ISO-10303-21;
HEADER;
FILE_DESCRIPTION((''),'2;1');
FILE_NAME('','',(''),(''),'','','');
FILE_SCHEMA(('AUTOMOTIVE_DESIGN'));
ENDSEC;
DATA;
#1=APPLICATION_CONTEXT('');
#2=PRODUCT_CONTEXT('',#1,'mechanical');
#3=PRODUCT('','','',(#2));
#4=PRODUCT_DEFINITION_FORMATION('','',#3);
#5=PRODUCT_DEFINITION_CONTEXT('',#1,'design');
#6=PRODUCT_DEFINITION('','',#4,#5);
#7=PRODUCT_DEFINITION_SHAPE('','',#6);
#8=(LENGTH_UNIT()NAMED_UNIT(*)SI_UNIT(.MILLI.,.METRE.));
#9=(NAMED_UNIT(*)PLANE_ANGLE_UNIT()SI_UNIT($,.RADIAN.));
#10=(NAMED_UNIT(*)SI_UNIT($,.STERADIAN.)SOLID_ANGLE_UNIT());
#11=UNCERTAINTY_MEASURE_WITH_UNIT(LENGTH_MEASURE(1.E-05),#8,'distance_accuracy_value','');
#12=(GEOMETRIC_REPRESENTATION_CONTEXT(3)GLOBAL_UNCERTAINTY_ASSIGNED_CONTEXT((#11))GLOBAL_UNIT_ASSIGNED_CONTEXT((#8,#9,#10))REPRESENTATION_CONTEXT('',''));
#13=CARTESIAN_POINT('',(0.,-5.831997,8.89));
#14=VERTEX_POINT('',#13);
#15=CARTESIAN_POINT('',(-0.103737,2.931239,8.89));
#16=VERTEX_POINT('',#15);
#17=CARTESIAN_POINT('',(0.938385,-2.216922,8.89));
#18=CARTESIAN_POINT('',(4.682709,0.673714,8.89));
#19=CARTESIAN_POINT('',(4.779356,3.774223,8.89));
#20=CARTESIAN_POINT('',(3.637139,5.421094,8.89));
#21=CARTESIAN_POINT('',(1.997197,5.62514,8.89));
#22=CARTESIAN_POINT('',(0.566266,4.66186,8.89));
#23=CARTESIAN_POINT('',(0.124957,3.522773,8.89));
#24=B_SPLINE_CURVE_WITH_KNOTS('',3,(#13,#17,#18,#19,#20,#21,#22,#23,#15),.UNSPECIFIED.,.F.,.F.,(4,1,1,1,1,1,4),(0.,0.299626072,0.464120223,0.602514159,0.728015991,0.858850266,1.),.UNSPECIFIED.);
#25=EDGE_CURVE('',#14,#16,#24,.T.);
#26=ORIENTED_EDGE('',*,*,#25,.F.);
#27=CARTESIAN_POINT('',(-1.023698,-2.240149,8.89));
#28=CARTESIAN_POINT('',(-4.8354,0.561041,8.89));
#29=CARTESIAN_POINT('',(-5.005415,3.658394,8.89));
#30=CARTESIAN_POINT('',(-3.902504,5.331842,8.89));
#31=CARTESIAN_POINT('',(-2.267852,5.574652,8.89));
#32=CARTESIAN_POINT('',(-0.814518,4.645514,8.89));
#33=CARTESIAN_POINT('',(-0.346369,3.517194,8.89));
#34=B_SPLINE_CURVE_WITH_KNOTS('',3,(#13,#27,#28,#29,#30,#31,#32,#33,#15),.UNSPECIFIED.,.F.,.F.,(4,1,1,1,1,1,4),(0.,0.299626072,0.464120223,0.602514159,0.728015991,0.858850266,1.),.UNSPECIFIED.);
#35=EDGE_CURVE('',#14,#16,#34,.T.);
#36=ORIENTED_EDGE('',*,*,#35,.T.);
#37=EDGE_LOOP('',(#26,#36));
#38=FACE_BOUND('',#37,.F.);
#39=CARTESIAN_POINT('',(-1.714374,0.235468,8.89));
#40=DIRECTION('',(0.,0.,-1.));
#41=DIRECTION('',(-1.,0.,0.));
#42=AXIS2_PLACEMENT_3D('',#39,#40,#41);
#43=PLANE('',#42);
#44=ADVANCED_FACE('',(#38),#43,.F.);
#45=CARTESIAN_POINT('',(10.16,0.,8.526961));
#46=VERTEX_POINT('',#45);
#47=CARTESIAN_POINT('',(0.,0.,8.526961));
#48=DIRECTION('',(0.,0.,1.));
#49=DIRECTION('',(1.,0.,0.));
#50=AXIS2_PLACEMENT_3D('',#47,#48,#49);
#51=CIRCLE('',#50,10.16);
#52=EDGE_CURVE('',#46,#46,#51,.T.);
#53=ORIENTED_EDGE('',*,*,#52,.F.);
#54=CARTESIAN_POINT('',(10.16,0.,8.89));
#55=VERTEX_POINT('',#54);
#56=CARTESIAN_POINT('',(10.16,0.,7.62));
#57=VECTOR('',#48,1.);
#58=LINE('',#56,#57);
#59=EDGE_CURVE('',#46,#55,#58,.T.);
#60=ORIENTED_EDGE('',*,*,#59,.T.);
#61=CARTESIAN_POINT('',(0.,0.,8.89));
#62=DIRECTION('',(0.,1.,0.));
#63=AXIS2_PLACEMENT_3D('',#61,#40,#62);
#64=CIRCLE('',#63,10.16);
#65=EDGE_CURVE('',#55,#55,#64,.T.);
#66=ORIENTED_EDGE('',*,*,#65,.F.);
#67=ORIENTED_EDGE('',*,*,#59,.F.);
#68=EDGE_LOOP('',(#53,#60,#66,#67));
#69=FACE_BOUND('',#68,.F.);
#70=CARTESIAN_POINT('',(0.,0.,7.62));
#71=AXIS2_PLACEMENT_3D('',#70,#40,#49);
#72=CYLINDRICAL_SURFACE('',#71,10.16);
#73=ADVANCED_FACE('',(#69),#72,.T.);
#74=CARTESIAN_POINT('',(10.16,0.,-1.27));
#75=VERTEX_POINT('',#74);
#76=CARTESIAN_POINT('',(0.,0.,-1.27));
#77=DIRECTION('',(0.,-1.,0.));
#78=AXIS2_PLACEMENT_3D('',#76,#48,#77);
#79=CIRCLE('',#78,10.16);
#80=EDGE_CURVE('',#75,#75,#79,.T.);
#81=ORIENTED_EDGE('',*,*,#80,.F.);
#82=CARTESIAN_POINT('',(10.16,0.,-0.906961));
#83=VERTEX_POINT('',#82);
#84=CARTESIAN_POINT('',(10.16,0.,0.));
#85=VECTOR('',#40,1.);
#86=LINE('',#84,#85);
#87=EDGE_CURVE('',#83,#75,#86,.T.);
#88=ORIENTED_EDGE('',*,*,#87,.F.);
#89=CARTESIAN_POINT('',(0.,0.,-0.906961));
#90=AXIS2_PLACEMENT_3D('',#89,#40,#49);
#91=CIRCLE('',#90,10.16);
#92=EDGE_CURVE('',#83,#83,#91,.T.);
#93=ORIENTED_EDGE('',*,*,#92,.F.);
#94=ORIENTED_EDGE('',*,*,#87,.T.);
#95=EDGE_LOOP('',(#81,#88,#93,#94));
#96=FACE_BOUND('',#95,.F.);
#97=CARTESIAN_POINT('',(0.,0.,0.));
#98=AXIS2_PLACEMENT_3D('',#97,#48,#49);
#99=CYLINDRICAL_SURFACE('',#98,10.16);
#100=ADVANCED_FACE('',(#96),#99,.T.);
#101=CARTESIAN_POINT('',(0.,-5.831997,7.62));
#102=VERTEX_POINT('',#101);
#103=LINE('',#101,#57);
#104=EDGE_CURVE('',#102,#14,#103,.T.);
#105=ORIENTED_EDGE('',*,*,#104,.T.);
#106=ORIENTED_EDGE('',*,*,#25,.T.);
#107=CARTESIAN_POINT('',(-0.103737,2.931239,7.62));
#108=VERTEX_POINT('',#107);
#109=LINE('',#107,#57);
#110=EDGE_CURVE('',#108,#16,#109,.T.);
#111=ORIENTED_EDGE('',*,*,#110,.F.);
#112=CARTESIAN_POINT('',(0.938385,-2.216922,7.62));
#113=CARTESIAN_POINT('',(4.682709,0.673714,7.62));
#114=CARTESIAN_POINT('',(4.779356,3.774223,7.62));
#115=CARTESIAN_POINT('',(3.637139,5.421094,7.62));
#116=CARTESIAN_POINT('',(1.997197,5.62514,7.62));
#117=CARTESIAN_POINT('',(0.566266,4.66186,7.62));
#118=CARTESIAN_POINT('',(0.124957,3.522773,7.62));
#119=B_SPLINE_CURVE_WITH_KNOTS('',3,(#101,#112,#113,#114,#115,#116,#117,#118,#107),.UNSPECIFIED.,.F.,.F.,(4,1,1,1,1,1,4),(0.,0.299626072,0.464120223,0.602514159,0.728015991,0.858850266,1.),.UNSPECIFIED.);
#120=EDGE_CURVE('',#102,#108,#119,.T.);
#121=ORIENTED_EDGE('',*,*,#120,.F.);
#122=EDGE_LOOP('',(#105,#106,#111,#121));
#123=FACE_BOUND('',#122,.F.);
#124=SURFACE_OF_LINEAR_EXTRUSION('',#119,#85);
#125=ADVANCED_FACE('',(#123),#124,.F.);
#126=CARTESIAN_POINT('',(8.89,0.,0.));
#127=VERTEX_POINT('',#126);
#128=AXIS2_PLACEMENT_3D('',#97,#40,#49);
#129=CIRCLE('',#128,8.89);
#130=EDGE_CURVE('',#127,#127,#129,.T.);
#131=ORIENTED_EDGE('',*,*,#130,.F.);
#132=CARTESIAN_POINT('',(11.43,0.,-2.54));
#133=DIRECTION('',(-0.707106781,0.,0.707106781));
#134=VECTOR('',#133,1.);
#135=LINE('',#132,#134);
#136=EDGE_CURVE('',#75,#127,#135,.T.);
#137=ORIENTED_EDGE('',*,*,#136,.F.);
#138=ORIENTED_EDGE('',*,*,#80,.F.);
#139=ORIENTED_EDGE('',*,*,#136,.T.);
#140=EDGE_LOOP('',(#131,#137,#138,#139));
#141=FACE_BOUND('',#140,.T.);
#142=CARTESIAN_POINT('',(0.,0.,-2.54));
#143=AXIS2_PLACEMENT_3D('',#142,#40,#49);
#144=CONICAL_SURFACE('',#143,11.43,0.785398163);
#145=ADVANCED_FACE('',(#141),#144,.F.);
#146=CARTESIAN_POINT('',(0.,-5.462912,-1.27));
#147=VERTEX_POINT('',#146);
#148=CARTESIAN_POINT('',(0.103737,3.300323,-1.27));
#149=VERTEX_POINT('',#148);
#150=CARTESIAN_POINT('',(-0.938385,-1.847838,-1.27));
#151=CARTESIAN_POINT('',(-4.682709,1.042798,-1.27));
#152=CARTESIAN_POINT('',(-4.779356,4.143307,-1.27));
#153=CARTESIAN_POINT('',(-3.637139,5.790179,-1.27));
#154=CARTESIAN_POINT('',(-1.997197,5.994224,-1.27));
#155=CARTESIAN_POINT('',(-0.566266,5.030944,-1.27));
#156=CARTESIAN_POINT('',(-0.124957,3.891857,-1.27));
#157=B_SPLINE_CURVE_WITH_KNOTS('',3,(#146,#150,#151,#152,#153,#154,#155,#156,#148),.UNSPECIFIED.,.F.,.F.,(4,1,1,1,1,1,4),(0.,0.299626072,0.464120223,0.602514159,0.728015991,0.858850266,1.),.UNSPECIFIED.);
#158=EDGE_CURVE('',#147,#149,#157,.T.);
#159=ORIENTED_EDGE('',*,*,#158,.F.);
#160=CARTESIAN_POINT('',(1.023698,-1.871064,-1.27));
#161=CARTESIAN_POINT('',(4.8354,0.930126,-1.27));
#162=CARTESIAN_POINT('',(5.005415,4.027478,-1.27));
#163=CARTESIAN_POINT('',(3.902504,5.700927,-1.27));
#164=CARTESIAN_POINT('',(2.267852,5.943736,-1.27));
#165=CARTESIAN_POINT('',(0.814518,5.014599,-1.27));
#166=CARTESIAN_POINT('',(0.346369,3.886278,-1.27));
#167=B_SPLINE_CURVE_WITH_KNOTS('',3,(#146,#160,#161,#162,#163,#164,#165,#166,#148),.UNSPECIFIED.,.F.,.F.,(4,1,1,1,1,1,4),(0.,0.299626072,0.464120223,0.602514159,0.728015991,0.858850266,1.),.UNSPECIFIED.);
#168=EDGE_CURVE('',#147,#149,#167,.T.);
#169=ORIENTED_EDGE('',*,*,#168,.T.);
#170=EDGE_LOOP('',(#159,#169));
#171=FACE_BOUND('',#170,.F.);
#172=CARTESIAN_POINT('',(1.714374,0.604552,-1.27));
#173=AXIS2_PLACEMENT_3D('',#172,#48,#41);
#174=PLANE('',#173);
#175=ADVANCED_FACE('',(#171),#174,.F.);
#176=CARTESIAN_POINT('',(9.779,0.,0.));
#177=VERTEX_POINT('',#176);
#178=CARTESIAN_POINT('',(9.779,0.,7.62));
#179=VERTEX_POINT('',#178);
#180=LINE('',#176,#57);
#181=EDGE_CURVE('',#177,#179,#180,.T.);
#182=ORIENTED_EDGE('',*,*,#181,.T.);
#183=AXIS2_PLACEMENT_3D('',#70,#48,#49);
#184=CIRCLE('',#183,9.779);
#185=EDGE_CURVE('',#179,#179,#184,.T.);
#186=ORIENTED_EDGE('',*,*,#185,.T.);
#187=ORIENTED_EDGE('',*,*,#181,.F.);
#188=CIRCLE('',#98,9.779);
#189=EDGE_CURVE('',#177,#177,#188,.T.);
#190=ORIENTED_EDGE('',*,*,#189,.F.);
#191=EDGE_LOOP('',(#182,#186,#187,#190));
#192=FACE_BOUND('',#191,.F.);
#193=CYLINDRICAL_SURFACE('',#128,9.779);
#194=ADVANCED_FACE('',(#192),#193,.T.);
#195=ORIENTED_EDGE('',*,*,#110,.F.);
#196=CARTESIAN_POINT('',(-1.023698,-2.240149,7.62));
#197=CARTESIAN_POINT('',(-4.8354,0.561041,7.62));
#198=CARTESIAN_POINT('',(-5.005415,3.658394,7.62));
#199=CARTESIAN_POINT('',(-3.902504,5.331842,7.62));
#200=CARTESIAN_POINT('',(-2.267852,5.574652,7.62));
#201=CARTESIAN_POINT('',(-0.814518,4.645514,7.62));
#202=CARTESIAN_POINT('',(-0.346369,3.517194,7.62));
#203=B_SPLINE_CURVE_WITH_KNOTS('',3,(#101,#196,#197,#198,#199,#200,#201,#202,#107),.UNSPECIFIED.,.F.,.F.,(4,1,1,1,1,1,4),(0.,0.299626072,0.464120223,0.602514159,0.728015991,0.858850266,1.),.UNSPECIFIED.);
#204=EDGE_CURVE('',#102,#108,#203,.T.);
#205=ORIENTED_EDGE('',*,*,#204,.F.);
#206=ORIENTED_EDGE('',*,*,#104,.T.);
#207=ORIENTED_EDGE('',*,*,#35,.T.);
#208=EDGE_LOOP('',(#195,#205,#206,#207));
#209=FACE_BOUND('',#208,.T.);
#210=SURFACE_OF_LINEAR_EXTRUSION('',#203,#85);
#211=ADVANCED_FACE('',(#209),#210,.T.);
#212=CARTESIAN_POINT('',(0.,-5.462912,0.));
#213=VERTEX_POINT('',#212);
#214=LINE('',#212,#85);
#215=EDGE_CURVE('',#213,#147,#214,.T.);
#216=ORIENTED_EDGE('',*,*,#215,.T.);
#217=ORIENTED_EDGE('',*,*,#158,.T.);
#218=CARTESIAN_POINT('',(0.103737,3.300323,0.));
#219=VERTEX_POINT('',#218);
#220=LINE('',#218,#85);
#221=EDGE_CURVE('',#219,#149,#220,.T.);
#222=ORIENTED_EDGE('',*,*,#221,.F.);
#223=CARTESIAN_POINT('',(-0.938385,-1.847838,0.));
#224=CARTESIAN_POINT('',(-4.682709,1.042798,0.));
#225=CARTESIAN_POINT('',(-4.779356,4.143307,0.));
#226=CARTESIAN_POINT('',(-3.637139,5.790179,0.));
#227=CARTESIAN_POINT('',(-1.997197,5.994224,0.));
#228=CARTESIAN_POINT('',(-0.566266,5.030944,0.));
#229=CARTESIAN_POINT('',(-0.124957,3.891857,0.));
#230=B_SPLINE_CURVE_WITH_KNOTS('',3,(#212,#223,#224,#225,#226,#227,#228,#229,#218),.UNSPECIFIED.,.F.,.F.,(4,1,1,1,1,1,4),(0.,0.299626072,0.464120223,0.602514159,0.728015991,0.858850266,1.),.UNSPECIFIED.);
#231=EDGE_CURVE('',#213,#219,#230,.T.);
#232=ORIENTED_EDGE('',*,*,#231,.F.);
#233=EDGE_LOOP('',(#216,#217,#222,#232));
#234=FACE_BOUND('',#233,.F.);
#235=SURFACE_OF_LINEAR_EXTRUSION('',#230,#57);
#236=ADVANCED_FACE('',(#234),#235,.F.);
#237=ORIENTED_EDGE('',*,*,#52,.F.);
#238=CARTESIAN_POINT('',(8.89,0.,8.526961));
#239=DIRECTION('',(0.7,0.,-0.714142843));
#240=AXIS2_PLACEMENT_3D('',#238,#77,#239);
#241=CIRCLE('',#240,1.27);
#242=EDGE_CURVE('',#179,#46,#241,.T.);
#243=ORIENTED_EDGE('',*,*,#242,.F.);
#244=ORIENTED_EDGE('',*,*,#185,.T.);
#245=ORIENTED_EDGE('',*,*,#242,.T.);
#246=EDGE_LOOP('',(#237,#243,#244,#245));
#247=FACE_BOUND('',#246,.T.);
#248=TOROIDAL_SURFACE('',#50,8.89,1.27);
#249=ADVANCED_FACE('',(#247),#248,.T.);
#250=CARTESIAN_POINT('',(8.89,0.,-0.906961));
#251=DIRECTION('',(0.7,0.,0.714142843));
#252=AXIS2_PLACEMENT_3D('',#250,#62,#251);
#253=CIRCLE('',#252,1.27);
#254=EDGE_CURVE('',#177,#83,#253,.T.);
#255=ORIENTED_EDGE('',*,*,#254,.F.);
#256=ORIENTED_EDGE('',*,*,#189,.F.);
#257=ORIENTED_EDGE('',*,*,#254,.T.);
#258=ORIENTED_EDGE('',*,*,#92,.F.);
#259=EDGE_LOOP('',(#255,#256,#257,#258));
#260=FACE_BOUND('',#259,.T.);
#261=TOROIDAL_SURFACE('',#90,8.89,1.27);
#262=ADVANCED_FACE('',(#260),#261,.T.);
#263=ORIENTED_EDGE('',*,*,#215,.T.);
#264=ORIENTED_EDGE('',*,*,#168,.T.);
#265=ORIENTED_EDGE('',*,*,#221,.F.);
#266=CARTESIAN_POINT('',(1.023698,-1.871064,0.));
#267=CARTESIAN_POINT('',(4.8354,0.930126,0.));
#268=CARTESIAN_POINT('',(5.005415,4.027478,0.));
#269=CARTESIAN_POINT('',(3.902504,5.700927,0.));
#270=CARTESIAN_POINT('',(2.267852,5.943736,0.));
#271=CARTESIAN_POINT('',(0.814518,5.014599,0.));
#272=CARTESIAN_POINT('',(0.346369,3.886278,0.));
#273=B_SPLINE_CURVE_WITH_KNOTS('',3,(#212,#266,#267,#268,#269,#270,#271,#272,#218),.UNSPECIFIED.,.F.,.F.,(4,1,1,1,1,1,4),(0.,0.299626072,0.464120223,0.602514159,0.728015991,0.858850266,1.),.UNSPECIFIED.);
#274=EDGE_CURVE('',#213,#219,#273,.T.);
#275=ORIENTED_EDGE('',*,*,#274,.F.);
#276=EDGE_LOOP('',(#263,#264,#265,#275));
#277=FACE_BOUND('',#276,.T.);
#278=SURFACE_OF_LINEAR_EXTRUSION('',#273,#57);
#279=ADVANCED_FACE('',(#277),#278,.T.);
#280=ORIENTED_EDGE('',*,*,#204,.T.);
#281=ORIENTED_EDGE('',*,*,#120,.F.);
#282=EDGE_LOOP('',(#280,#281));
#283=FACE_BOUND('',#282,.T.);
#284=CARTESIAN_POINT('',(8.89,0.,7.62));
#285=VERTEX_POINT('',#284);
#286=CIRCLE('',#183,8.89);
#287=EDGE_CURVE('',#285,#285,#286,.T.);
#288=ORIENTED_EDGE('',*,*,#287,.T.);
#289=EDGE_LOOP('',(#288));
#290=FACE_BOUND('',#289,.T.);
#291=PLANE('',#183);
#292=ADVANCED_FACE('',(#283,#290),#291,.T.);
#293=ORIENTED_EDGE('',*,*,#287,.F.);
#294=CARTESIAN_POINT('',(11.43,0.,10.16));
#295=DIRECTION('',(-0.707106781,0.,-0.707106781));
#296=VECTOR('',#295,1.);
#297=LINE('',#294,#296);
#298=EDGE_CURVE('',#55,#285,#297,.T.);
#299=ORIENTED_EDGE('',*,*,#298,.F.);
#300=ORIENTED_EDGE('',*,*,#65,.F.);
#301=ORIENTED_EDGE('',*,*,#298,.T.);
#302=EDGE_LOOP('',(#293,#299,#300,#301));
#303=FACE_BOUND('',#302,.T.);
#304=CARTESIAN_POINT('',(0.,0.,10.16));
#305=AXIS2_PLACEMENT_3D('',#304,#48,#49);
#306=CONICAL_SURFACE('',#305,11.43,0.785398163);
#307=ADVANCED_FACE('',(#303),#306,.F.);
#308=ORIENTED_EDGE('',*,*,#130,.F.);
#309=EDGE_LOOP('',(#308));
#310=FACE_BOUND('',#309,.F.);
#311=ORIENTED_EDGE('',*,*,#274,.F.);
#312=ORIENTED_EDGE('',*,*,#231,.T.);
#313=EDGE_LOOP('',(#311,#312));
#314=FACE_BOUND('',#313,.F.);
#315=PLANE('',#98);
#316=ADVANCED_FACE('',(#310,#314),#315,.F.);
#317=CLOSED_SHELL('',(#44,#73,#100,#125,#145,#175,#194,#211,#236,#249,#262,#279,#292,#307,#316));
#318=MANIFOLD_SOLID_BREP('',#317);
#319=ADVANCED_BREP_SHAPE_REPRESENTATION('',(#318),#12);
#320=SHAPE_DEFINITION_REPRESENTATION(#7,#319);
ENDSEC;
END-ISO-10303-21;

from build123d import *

# Parameters (mm, degrees)
F0_R      = 9.779
F1_DEPTH  = 7.62
F2_R      = 10.16
F2_R_2    = 8.89
F3_DEPTH  = 2.54
F5_R      = 10.16
F5_R_2    = 8.89
F6_DEPTH  = 2.54
F9_DEPTH  = 1.27
F11_DEPTH = 1.27


# Not quite as in the source:
# - a fillet or chamfer that OpenCascade refuses, or shapes differently, is made with other operations: its cross-section is extruded or revolved along the edge and cut away or added


with BuildPart() as f1:
    # F0 (on Top) → F1 (new body)
    with BuildSketch(Plane.XY):
        Circle(F0_R)
    extrude(amount=F1_DEPTH)

    # F2 (on face) → F3 (join)
    with BuildSketch(Plane.XY.offset(7.62)):
        Circle(F2_R)
        Circle(F2_R_2, mode=Mode.SUBTRACT)
    extrude(amount=F3_DEPTH)

    # F4: chamfer of 2.54 on 1 edges, made by hand


with BuildPart() as f4_tool2:
    # F4_s3 → F4_t4 (revolve)
    with BuildSketch(Plane.XZ):
        Polygon((11.43, 10.16), (8.89, 7.62), (8.89, 10.16), align=None)
    revolve(axis=Axis((0, 0, 10.16), (0, 0, 1)))

    split(bisect_by=Plane.XY.offset(7.62), keep=Keep.TOP)


with BuildPart() as f1_1:
    add(f1.part)

    # F4_t1: cut F4_tool2
    add(f4_tool2.part, mode=Mode.SUBTRACT)

    # F5 (on face) → F6 (join)
    with BuildSketch(Plane(origin=(0, 0, 0), x_dir=(1, 0, 0), z_dir=(0, 0, -1))):
        Circle(F5_R)
        Circle(F5_R_2, mode=Mode.SUBTRACT)
    extrude(amount=F6_DEPTH)

    # F7: chamfer of 2.54 on 1 edges, made by hand


with BuildPart() as f7_tool2:
    # F7_s3 → F7_t4 (revolve)
    with BuildSketch(Plane.XZ):
        Polygon((11.43, -2.54), (8.89, 0), (8.89, -2.54), align=None)
    revolve(axis=Axis((0, 0, -2.54), (0, 0, -1)))

    split(bisect_by=Plane.XY, keep=Keep.BOTTOM)


with BuildPart() as f1_2:
    add(f1_1.part)

    # F7_t1: cut F7_tool2
    add(f7_tool2.part, mode=Mode.SUBTRACT)

    # F8 (on face) → F9 (join)
    with BuildSketch(Plane.XY.offset(7.62)):
        with BuildLine():
            add(Edge.make_bspline(
                [(0, -5.8319969103), (-1.0236980804, -2.2401487669), (-4.8354001596, 0.5610413637), (-5.0054154902, 3.6583937204), (-3.9025040717, 5.331842318), (-2.2678517349, 5.574651604), (-0.814518434, 4.6455144306), (-0.3463686184, 3.5171935493), (-0.1037365128, 2.9312386094)],
                knots=[0, 0, 0, 0, 0.2996260724, 0.4641202227, 0.6025141594, 0.7280159913, 0.8588502662, 1, 1, 1, 1], degree=3))
            Line((0, -5.8319969103), (-0.1037365128, 2.9312386094))
        make_face()
        with BuildLine():
            Line((-0.1037365128, 2.9312386094), (0, -5.8319969103))
            add(Edge.make_bspline(
                [(0, -5.8319969103), (0.9383847232, -2.2169222283), (4.6827086977, 0.6737138371), (4.7793556331, 3.7742228605), (3.6371392772, 5.4210943193), (1.997197208, 5.6251399542), (0.5662657677, 4.6618597334), (0.1249568333, 3.5227729564), (-0.1037365128, 2.9312386094)],
                knots=[0, 0, 0, 0, 0.2996260724, 0.4641202227, 0.6025141594, 0.7280159913, 0.8588502662, 1, 1, 1, 1], degree=3))
        make_face()
    extrude(amount=F9_DEPTH)

    # F10 (on face) → F11 (join)
    with BuildSketch(Plane(origin=(0, 0, 0), x_dir=(1, 0, 0), z_dir=(0, 0, -1))):
        with BuildLine():
            add(Edge.make_bspline(
                [(0, 5.462912377), (1.0236980804, 1.8710642336), (4.8354001596, -0.930125897), (5.0054154902, -4.0274782537), (3.9025040717, -5.7009268513), (2.2678517349, -5.9437361373), (0.814518434, -5.0145989639), (0.3463686184, -3.8862780826), (0.1037365128, -3.3003231427)],
                knots=[0, 0, 0, 0, 0.2996260724, 0.4641202227, 0.6025141594, 0.7280159913, 0.8588502662, 1, 1, 1, 1], degree=3))
            Line((0, 5.462912377), (0.1037365128, -3.3003231427))
        make_face()
        with BuildLine():
            Line((0.1037365128, -3.3003231427), (0, 5.462912377))
            add(Edge.make_bspline(
                [(0, 5.462912377), (-0.9383847232, 1.847837695), (-4.6827086977, -1.0427983704), (-4.7793556331, -4.1433073938), (-3.6371392772, -5.7901788526), (-1.997197208, -5.9942244875), (-0.5662657677, -5.0309442667), (-0.1249568333, -3.8918574898), (0.1037365128, -3.3003231427)],
                knots=[0, 0, 0, 0, 0.2996260724, 0.4641202227, 0.6025141594, 0.7280159913, 0.8588502662, 1, 1, 1, 1], degree=3))
        make_face()
    extrude(amount=F11_DEPTH)

    # F12: fillet of radius 1.27 on 2 edges, made by hand

    # F12_s1 → F12_t2 (revolve, cut)
    with BuildSketch(Plane.XZ):
        with BuildLine():
            ThreePointArc((9.779, 0), (10.0608821461, -0.4150925255), (10.16, -0.9069614104))
            Line((10.16, -0.9069614104), (10.16, 0))
            Line((10.16, 0), (9.779, 0))
        make_face()
    revolve(axis=Axis((0, 0, 0), (0, 0, -1)), mode=Mode.SUBTRACT)

    # F12_s3 → F12_t4 (revolve, cut)
    with BuildSketch(Plane.XZ):
        with BuildLine():
            ThreePointArc((9.779, 7.62), (10.0608821461, 8.0350925255), (10.16, 8.5269614104))
            Line((10.16, 8.5269614104), (10.16, 7.62))
            Line((10.16, 7.62), (9.779, 7.62))
        make_face()
    revolve(axis=Axis((0, 0, 7.62), (0, 0, 1)), mode=Mode.SUBTRACT)


solid = f1_2.part
